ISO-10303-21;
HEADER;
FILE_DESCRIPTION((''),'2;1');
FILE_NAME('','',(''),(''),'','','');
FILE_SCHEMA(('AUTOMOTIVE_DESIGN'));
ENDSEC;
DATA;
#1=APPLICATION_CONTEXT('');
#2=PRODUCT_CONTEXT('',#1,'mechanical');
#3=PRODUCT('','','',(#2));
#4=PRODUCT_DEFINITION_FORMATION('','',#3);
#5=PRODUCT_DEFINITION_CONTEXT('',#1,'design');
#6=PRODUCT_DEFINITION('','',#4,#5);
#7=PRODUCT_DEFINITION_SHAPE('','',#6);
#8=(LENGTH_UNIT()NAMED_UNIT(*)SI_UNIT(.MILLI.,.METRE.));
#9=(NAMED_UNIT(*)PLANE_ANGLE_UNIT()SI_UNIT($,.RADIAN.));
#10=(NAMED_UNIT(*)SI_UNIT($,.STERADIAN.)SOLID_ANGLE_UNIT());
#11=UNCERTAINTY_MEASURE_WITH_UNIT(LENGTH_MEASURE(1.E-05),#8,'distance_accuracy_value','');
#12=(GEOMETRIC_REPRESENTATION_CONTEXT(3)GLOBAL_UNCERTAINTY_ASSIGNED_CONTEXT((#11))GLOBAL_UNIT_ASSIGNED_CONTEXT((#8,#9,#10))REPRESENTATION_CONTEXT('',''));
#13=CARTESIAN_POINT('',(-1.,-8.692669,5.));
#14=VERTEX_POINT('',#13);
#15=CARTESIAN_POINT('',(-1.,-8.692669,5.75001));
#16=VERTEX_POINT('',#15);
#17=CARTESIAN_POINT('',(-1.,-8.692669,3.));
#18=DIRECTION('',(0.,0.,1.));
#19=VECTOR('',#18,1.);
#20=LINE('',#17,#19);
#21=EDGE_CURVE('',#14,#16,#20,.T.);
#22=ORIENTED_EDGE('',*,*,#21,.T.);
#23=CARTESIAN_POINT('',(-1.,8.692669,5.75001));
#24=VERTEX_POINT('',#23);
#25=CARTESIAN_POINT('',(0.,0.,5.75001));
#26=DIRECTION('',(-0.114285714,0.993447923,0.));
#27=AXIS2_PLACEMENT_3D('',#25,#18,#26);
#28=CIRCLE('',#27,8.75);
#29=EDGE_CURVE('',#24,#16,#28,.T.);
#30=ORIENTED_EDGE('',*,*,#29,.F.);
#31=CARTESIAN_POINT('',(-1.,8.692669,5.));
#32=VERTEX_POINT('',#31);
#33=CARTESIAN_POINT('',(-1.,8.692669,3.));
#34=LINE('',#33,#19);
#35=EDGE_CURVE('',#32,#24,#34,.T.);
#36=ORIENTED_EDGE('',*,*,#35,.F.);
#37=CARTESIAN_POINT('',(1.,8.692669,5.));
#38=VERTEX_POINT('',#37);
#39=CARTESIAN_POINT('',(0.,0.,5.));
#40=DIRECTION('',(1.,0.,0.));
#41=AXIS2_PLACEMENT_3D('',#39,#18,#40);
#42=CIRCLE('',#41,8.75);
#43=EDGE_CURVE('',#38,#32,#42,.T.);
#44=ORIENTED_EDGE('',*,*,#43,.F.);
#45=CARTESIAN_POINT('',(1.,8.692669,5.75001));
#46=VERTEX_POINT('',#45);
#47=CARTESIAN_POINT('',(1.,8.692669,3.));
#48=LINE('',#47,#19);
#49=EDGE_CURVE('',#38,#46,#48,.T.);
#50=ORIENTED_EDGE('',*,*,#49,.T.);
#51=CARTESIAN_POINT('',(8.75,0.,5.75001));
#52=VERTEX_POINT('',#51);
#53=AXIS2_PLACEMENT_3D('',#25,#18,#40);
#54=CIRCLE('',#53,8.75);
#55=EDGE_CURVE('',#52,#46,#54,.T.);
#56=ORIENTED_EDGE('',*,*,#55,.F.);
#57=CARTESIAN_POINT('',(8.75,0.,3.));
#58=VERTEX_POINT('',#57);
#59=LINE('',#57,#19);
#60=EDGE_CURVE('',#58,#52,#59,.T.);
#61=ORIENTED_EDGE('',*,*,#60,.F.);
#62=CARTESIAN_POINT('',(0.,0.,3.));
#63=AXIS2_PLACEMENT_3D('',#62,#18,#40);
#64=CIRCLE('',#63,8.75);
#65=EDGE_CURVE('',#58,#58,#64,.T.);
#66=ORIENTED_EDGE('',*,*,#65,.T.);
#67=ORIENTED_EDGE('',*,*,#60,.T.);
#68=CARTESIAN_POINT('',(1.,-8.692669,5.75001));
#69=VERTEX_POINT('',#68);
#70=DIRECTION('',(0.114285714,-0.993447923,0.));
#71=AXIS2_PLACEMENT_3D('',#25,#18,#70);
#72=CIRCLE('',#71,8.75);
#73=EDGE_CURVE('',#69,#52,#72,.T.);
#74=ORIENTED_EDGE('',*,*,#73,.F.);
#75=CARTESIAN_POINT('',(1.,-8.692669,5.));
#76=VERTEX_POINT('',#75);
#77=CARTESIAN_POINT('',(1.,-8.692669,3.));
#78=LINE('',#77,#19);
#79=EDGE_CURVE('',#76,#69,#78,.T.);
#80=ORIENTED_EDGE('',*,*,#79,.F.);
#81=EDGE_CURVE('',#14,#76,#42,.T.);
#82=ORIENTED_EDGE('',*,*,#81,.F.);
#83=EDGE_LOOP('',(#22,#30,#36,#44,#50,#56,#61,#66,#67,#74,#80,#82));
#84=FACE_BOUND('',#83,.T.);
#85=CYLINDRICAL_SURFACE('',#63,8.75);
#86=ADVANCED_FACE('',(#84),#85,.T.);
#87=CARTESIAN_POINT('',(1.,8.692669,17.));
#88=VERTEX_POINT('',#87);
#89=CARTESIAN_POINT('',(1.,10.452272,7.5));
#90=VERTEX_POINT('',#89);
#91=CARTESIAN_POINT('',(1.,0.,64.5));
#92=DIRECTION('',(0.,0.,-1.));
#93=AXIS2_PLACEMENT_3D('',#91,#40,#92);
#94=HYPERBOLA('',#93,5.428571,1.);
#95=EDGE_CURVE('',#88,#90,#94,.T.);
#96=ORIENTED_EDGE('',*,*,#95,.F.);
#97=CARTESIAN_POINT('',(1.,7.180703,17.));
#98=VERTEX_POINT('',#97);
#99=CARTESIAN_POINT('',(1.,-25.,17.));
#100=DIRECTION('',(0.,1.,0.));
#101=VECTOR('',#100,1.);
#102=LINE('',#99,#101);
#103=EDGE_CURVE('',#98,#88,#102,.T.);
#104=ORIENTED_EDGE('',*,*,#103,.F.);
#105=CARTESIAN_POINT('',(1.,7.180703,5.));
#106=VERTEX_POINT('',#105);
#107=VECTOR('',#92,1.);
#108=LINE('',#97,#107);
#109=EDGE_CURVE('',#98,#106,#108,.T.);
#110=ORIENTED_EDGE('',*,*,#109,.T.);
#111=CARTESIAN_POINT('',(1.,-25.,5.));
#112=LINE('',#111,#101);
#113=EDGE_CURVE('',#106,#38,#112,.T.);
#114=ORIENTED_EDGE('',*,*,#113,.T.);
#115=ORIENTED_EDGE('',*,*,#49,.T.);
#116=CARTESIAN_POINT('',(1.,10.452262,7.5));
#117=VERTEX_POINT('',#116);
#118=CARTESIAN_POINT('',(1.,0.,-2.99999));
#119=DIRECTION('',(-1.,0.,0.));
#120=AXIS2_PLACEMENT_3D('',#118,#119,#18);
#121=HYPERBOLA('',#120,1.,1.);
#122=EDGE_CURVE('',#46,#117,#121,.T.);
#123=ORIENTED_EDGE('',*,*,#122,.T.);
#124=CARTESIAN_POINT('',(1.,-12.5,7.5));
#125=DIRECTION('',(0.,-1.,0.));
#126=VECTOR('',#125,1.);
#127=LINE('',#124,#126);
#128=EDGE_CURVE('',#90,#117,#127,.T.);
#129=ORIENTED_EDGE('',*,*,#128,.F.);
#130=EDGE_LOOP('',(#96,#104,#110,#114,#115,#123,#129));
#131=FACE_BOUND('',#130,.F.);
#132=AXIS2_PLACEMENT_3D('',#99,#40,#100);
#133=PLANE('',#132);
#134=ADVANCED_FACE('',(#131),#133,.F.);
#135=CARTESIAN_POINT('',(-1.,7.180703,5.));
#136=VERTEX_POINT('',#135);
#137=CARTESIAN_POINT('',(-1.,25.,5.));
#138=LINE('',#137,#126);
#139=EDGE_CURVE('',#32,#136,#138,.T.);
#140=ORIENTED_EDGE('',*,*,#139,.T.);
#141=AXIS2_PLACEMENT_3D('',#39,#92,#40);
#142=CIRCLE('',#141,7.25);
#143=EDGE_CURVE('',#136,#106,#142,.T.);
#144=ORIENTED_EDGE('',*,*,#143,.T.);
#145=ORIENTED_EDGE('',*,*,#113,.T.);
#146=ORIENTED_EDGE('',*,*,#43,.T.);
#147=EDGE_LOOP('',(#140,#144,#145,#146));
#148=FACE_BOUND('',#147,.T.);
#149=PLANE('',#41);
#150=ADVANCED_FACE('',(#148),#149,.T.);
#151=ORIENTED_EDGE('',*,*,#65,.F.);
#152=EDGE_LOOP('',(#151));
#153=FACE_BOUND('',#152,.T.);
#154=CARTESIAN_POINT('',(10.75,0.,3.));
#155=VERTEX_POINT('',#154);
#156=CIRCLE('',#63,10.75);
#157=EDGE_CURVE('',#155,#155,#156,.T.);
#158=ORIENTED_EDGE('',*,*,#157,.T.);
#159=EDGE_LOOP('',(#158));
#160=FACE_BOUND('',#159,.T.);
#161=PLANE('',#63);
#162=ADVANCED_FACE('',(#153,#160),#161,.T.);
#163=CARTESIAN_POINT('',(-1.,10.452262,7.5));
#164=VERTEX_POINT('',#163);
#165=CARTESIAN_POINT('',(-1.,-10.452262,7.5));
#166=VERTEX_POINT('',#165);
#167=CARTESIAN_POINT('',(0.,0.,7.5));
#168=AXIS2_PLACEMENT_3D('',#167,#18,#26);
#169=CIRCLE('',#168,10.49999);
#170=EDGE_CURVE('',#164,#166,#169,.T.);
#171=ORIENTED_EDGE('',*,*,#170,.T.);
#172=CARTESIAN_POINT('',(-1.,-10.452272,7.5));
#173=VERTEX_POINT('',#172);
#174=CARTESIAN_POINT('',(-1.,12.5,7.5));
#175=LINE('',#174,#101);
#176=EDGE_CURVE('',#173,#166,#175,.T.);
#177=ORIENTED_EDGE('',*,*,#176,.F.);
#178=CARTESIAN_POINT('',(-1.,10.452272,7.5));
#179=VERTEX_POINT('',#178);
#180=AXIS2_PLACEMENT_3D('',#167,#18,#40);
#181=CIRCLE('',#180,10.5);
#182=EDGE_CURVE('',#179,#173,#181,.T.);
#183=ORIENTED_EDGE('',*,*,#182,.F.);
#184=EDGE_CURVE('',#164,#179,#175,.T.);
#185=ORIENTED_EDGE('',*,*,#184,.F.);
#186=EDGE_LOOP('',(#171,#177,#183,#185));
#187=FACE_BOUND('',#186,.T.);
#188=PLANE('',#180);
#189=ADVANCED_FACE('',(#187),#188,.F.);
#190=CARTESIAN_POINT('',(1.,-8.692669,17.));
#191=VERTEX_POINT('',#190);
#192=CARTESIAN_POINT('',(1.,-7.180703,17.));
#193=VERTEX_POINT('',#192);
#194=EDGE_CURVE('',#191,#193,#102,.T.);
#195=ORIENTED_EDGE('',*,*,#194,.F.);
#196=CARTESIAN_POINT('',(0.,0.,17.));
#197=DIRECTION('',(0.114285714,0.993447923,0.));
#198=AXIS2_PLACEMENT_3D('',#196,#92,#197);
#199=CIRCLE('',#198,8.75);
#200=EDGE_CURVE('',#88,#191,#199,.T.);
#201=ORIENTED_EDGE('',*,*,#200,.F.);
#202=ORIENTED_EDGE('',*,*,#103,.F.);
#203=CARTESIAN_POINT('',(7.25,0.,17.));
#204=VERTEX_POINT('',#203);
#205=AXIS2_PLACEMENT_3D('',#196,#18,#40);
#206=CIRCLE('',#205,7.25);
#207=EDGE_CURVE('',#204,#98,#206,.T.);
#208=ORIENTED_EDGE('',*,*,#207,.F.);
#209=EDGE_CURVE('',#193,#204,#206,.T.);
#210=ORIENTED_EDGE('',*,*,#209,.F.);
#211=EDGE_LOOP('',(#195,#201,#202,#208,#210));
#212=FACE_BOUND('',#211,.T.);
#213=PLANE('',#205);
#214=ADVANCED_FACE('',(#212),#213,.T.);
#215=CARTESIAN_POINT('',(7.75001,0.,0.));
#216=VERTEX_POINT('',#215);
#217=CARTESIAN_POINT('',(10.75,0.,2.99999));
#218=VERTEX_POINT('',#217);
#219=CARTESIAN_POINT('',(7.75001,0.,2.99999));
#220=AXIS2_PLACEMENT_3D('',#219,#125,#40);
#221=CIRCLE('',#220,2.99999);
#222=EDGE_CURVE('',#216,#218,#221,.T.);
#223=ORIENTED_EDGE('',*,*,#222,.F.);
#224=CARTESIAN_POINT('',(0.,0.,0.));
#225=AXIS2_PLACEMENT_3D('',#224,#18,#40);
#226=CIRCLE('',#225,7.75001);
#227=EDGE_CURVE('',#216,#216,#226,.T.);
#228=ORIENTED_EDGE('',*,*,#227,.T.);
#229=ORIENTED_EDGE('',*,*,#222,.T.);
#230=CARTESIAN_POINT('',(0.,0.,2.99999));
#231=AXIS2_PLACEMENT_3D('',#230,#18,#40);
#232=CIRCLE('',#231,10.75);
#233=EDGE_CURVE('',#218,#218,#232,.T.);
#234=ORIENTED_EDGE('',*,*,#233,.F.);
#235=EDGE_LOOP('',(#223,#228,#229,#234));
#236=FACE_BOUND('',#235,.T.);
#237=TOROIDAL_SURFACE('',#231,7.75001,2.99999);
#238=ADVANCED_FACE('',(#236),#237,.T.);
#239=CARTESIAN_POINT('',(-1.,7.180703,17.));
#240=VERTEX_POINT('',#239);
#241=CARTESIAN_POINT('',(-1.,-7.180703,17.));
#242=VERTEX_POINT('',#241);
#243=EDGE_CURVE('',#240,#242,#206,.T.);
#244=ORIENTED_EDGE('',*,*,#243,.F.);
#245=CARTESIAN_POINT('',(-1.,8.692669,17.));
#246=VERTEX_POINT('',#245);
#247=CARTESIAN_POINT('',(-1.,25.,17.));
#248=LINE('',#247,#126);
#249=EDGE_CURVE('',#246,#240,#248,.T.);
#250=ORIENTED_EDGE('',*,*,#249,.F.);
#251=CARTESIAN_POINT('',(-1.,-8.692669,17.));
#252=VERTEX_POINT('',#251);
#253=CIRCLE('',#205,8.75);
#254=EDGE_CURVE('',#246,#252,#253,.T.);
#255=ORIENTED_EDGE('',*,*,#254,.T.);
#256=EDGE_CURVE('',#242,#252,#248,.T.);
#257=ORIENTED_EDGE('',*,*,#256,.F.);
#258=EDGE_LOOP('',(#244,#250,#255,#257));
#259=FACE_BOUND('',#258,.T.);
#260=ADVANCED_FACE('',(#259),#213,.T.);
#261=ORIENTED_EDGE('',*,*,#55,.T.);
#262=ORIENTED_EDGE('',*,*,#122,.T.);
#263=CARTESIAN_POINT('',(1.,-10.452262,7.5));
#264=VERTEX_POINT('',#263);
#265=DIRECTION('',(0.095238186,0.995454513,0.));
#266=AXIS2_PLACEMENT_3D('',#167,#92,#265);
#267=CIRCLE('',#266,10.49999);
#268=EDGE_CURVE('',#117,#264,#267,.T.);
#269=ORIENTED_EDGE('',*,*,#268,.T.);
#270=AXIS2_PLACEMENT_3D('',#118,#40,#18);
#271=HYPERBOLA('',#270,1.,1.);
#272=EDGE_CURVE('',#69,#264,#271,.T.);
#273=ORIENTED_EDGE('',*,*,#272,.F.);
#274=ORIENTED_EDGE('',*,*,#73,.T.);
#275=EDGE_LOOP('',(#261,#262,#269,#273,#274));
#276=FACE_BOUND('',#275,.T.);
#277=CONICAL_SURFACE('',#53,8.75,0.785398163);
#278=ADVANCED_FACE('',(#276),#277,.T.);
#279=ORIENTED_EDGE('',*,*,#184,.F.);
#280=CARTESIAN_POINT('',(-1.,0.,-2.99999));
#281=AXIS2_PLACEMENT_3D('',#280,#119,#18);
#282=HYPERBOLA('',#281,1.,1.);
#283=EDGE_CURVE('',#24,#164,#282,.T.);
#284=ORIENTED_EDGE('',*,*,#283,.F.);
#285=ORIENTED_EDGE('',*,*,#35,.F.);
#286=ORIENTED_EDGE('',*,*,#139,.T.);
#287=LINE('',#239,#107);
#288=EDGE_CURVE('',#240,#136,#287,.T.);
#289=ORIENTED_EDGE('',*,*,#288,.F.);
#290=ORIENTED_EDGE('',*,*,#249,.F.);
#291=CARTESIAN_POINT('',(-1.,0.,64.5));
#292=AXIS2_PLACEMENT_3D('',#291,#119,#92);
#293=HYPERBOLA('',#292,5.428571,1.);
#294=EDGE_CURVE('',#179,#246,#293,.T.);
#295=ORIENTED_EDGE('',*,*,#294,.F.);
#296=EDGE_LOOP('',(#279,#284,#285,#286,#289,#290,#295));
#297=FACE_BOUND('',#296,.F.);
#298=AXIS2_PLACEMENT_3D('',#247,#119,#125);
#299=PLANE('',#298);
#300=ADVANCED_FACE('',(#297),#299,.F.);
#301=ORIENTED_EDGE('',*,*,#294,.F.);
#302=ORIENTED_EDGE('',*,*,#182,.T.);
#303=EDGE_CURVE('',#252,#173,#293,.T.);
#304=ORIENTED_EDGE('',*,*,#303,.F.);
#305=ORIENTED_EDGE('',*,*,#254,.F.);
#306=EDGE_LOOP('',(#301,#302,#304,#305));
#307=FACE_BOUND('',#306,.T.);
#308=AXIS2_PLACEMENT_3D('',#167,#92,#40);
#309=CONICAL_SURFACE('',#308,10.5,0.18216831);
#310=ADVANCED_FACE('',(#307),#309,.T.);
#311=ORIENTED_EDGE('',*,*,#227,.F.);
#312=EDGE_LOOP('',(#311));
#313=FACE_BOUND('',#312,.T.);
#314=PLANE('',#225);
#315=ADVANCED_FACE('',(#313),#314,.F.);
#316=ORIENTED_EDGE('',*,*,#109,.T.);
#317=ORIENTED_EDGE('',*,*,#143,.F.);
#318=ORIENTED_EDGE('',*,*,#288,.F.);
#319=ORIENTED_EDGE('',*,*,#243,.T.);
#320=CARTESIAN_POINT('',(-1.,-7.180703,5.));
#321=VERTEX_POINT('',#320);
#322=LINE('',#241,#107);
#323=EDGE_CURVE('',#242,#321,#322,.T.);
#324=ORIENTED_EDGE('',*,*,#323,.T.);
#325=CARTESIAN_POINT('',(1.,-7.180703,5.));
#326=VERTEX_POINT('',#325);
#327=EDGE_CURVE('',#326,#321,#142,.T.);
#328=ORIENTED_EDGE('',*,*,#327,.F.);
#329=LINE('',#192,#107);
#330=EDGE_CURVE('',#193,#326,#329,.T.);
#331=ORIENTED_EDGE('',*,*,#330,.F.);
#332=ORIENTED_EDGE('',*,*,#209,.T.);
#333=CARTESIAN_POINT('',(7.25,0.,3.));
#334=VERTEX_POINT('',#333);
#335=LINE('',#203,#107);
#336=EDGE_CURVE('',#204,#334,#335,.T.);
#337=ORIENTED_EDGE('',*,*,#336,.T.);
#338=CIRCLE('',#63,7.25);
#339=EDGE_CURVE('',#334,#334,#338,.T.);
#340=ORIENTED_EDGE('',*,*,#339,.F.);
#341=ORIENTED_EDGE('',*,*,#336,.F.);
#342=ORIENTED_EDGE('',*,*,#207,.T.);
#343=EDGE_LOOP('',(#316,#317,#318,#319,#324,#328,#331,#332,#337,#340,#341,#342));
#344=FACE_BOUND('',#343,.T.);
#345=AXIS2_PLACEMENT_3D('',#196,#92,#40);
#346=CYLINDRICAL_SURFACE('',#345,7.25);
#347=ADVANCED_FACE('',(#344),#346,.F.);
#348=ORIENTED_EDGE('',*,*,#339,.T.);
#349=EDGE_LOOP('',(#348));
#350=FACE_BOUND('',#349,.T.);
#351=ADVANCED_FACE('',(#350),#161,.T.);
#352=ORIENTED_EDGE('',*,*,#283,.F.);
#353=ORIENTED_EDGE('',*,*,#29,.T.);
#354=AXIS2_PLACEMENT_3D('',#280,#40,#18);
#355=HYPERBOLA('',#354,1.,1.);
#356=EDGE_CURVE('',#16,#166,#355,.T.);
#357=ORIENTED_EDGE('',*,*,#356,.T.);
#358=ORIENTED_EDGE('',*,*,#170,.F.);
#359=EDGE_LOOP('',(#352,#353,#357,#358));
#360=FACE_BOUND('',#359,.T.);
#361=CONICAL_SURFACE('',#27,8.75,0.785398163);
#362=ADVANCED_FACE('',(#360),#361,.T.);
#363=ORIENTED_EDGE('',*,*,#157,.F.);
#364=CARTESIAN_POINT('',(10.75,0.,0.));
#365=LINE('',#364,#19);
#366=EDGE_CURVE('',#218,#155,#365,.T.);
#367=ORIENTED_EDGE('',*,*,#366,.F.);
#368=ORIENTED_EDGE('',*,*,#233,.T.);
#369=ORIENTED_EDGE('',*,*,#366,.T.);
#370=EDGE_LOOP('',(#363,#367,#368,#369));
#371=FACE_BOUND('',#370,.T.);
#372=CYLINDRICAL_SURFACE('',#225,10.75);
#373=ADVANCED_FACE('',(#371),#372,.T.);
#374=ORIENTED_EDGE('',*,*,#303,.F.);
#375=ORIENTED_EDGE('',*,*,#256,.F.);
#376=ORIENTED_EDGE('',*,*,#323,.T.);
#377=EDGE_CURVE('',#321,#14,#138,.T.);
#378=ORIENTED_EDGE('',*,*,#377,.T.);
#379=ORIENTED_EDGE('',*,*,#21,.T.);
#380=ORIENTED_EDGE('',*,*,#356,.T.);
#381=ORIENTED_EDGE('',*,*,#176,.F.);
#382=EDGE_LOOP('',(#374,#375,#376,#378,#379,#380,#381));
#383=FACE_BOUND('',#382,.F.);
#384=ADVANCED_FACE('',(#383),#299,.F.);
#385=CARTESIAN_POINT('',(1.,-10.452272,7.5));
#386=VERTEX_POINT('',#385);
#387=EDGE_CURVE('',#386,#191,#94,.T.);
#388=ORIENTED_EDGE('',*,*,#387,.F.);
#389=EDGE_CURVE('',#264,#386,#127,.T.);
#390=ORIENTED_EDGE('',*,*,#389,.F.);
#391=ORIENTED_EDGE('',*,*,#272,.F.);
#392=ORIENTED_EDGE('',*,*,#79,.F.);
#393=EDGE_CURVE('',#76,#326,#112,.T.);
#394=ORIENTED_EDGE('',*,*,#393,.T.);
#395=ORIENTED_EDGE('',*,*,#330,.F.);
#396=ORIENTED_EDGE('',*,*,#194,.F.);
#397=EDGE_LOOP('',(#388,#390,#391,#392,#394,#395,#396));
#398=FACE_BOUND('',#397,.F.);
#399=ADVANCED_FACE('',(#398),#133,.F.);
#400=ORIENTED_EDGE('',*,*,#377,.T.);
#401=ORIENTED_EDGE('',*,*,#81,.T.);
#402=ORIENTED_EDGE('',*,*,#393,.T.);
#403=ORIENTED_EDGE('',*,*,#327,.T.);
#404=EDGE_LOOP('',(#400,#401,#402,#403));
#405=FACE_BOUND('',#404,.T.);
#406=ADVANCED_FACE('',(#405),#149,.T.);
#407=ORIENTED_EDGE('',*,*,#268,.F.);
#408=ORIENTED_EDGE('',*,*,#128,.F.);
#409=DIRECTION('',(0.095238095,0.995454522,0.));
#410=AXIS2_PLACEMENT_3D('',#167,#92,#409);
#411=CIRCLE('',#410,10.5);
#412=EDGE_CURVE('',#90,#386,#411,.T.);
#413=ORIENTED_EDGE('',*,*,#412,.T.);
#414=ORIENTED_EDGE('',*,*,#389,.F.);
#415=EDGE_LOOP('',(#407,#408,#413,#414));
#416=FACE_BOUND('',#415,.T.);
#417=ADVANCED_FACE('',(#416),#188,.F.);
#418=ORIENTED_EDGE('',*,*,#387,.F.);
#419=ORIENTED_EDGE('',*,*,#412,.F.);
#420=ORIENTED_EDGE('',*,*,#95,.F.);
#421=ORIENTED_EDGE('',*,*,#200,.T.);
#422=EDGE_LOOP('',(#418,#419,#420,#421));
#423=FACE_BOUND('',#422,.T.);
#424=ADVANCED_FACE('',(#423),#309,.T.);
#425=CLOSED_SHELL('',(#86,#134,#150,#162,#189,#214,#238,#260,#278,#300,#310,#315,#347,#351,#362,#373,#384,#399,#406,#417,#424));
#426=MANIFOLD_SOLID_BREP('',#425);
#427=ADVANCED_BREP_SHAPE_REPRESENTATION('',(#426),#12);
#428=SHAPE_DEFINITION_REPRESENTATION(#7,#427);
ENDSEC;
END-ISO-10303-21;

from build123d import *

# Parameters (mm, degrees)
F3_DEPTH = 12
F4_R     = 2.99999
F5_SIZE  = 1.74999


# Not quite as in the source:
# - a fillet or chamfer is up to 0.001 mm smaller than in the source, because OpenCascade refuses the exact size


with BuildPart() as f1:
    # F0 (on Front) → F1 (revolve)
    with BuildSketch(Plane.XZ):
        Polygon((0, 3), (0, 0), (10.75, 0), (10.75, 3), (8.75, 3), (8.75, 7.5), (10.5, 7.5), (8.75, 17), (7.25, 17), (7.25, 3), align=None)
    revolve(axis=Axis((0, 0, 1.5), (0, 0, 1)))

    # F2 (on face) → F3 (cut, through all)
    with BuildSketch(Plane.XY.offset(17)):
        with BuildLine():
            Line((1, -7.1807033082), (1, 7.1807033082))
            ThreePointArc((1, 7.1807033082), (0, 7.25), (-1, 7.1807033082))
            Line((-1, 7.1807033082), (-1, -7.1807033082))
            ThreePointArc((-1, -7.1807033082), (0, -7.25), (1, -7.1807033082))
        make_face()
        with BuildLine():
            Line((1, 7.1807033082), (1, 8.6926693254))
            ThreePointArc((1, 8.6926693254), (0, 8.75), (-1, 8.6926693254))
            Line((-1, 8.6926693254), (-1, 7.1807033082))
            ThreePointArc((-1, 7.1807033082), (0, 7.25), (1, 7.1807033082))
        make_face()
        with BuildLine():
            Line((-1, -7.1807033082), (-1, -8.6926693254))
            ThreePointArc((-1, -8.6926693254), (0, -8.75), (1, -8.6926693254))
            Line((1, -8.6926693254), (1, -7.1807033082))
            ThreePointArc((1, -7.1807033082), (0, -7.25), (-1, -7.1807033082))
        make_face()
        with BuildLine():
            ThreePointArc((1, -8.6926693254), (0, -8.75), (-1, -8.6926693254))
            Line((-1, -8.6926693254), (-1, -25))
            Line((-1, -25), (1, -25))
            Line((1, -25), (1, -8.6926693254))
        make_face()
        with BuildLine():
            Line((1, 8.6926693254), (1, 25))
            Line((1, 25), (-1, 25))
            Line((-1, 25), (-1, 8.6926693254))
            ThreePointArc((-1, 8.6926693254), (0, 8.75), (1, 8.6926693254))
        make_face()
    extrude(amount=-F3_DEPTH, mode=Mode.SUBTRACT)

    # F4 (radius 3 in the source; OpenCascade refuses exactly that, so slightly less here)
    f4_edges = [f1.edges().sort_by_distance(p)[0] for p in [
        (-10.75, 0, 0),
    ]]
    fillet(f4_edges, radius=F4_R)

    # F5 (size 1.75 in the source; OpenCascade refuses exactly that, so slightly less here)
    f5_edges = [f1.edges().sort_by_distance(p)[0] for p in [
        (-8.75, 0, 7.5),
        (6.531175, 5.822907, 7.5),
        (6.531175, -5.822907, 7.5),
    ]]
    chamfer(f5_edges, length=F5_SIZE)


solid = f1.part
